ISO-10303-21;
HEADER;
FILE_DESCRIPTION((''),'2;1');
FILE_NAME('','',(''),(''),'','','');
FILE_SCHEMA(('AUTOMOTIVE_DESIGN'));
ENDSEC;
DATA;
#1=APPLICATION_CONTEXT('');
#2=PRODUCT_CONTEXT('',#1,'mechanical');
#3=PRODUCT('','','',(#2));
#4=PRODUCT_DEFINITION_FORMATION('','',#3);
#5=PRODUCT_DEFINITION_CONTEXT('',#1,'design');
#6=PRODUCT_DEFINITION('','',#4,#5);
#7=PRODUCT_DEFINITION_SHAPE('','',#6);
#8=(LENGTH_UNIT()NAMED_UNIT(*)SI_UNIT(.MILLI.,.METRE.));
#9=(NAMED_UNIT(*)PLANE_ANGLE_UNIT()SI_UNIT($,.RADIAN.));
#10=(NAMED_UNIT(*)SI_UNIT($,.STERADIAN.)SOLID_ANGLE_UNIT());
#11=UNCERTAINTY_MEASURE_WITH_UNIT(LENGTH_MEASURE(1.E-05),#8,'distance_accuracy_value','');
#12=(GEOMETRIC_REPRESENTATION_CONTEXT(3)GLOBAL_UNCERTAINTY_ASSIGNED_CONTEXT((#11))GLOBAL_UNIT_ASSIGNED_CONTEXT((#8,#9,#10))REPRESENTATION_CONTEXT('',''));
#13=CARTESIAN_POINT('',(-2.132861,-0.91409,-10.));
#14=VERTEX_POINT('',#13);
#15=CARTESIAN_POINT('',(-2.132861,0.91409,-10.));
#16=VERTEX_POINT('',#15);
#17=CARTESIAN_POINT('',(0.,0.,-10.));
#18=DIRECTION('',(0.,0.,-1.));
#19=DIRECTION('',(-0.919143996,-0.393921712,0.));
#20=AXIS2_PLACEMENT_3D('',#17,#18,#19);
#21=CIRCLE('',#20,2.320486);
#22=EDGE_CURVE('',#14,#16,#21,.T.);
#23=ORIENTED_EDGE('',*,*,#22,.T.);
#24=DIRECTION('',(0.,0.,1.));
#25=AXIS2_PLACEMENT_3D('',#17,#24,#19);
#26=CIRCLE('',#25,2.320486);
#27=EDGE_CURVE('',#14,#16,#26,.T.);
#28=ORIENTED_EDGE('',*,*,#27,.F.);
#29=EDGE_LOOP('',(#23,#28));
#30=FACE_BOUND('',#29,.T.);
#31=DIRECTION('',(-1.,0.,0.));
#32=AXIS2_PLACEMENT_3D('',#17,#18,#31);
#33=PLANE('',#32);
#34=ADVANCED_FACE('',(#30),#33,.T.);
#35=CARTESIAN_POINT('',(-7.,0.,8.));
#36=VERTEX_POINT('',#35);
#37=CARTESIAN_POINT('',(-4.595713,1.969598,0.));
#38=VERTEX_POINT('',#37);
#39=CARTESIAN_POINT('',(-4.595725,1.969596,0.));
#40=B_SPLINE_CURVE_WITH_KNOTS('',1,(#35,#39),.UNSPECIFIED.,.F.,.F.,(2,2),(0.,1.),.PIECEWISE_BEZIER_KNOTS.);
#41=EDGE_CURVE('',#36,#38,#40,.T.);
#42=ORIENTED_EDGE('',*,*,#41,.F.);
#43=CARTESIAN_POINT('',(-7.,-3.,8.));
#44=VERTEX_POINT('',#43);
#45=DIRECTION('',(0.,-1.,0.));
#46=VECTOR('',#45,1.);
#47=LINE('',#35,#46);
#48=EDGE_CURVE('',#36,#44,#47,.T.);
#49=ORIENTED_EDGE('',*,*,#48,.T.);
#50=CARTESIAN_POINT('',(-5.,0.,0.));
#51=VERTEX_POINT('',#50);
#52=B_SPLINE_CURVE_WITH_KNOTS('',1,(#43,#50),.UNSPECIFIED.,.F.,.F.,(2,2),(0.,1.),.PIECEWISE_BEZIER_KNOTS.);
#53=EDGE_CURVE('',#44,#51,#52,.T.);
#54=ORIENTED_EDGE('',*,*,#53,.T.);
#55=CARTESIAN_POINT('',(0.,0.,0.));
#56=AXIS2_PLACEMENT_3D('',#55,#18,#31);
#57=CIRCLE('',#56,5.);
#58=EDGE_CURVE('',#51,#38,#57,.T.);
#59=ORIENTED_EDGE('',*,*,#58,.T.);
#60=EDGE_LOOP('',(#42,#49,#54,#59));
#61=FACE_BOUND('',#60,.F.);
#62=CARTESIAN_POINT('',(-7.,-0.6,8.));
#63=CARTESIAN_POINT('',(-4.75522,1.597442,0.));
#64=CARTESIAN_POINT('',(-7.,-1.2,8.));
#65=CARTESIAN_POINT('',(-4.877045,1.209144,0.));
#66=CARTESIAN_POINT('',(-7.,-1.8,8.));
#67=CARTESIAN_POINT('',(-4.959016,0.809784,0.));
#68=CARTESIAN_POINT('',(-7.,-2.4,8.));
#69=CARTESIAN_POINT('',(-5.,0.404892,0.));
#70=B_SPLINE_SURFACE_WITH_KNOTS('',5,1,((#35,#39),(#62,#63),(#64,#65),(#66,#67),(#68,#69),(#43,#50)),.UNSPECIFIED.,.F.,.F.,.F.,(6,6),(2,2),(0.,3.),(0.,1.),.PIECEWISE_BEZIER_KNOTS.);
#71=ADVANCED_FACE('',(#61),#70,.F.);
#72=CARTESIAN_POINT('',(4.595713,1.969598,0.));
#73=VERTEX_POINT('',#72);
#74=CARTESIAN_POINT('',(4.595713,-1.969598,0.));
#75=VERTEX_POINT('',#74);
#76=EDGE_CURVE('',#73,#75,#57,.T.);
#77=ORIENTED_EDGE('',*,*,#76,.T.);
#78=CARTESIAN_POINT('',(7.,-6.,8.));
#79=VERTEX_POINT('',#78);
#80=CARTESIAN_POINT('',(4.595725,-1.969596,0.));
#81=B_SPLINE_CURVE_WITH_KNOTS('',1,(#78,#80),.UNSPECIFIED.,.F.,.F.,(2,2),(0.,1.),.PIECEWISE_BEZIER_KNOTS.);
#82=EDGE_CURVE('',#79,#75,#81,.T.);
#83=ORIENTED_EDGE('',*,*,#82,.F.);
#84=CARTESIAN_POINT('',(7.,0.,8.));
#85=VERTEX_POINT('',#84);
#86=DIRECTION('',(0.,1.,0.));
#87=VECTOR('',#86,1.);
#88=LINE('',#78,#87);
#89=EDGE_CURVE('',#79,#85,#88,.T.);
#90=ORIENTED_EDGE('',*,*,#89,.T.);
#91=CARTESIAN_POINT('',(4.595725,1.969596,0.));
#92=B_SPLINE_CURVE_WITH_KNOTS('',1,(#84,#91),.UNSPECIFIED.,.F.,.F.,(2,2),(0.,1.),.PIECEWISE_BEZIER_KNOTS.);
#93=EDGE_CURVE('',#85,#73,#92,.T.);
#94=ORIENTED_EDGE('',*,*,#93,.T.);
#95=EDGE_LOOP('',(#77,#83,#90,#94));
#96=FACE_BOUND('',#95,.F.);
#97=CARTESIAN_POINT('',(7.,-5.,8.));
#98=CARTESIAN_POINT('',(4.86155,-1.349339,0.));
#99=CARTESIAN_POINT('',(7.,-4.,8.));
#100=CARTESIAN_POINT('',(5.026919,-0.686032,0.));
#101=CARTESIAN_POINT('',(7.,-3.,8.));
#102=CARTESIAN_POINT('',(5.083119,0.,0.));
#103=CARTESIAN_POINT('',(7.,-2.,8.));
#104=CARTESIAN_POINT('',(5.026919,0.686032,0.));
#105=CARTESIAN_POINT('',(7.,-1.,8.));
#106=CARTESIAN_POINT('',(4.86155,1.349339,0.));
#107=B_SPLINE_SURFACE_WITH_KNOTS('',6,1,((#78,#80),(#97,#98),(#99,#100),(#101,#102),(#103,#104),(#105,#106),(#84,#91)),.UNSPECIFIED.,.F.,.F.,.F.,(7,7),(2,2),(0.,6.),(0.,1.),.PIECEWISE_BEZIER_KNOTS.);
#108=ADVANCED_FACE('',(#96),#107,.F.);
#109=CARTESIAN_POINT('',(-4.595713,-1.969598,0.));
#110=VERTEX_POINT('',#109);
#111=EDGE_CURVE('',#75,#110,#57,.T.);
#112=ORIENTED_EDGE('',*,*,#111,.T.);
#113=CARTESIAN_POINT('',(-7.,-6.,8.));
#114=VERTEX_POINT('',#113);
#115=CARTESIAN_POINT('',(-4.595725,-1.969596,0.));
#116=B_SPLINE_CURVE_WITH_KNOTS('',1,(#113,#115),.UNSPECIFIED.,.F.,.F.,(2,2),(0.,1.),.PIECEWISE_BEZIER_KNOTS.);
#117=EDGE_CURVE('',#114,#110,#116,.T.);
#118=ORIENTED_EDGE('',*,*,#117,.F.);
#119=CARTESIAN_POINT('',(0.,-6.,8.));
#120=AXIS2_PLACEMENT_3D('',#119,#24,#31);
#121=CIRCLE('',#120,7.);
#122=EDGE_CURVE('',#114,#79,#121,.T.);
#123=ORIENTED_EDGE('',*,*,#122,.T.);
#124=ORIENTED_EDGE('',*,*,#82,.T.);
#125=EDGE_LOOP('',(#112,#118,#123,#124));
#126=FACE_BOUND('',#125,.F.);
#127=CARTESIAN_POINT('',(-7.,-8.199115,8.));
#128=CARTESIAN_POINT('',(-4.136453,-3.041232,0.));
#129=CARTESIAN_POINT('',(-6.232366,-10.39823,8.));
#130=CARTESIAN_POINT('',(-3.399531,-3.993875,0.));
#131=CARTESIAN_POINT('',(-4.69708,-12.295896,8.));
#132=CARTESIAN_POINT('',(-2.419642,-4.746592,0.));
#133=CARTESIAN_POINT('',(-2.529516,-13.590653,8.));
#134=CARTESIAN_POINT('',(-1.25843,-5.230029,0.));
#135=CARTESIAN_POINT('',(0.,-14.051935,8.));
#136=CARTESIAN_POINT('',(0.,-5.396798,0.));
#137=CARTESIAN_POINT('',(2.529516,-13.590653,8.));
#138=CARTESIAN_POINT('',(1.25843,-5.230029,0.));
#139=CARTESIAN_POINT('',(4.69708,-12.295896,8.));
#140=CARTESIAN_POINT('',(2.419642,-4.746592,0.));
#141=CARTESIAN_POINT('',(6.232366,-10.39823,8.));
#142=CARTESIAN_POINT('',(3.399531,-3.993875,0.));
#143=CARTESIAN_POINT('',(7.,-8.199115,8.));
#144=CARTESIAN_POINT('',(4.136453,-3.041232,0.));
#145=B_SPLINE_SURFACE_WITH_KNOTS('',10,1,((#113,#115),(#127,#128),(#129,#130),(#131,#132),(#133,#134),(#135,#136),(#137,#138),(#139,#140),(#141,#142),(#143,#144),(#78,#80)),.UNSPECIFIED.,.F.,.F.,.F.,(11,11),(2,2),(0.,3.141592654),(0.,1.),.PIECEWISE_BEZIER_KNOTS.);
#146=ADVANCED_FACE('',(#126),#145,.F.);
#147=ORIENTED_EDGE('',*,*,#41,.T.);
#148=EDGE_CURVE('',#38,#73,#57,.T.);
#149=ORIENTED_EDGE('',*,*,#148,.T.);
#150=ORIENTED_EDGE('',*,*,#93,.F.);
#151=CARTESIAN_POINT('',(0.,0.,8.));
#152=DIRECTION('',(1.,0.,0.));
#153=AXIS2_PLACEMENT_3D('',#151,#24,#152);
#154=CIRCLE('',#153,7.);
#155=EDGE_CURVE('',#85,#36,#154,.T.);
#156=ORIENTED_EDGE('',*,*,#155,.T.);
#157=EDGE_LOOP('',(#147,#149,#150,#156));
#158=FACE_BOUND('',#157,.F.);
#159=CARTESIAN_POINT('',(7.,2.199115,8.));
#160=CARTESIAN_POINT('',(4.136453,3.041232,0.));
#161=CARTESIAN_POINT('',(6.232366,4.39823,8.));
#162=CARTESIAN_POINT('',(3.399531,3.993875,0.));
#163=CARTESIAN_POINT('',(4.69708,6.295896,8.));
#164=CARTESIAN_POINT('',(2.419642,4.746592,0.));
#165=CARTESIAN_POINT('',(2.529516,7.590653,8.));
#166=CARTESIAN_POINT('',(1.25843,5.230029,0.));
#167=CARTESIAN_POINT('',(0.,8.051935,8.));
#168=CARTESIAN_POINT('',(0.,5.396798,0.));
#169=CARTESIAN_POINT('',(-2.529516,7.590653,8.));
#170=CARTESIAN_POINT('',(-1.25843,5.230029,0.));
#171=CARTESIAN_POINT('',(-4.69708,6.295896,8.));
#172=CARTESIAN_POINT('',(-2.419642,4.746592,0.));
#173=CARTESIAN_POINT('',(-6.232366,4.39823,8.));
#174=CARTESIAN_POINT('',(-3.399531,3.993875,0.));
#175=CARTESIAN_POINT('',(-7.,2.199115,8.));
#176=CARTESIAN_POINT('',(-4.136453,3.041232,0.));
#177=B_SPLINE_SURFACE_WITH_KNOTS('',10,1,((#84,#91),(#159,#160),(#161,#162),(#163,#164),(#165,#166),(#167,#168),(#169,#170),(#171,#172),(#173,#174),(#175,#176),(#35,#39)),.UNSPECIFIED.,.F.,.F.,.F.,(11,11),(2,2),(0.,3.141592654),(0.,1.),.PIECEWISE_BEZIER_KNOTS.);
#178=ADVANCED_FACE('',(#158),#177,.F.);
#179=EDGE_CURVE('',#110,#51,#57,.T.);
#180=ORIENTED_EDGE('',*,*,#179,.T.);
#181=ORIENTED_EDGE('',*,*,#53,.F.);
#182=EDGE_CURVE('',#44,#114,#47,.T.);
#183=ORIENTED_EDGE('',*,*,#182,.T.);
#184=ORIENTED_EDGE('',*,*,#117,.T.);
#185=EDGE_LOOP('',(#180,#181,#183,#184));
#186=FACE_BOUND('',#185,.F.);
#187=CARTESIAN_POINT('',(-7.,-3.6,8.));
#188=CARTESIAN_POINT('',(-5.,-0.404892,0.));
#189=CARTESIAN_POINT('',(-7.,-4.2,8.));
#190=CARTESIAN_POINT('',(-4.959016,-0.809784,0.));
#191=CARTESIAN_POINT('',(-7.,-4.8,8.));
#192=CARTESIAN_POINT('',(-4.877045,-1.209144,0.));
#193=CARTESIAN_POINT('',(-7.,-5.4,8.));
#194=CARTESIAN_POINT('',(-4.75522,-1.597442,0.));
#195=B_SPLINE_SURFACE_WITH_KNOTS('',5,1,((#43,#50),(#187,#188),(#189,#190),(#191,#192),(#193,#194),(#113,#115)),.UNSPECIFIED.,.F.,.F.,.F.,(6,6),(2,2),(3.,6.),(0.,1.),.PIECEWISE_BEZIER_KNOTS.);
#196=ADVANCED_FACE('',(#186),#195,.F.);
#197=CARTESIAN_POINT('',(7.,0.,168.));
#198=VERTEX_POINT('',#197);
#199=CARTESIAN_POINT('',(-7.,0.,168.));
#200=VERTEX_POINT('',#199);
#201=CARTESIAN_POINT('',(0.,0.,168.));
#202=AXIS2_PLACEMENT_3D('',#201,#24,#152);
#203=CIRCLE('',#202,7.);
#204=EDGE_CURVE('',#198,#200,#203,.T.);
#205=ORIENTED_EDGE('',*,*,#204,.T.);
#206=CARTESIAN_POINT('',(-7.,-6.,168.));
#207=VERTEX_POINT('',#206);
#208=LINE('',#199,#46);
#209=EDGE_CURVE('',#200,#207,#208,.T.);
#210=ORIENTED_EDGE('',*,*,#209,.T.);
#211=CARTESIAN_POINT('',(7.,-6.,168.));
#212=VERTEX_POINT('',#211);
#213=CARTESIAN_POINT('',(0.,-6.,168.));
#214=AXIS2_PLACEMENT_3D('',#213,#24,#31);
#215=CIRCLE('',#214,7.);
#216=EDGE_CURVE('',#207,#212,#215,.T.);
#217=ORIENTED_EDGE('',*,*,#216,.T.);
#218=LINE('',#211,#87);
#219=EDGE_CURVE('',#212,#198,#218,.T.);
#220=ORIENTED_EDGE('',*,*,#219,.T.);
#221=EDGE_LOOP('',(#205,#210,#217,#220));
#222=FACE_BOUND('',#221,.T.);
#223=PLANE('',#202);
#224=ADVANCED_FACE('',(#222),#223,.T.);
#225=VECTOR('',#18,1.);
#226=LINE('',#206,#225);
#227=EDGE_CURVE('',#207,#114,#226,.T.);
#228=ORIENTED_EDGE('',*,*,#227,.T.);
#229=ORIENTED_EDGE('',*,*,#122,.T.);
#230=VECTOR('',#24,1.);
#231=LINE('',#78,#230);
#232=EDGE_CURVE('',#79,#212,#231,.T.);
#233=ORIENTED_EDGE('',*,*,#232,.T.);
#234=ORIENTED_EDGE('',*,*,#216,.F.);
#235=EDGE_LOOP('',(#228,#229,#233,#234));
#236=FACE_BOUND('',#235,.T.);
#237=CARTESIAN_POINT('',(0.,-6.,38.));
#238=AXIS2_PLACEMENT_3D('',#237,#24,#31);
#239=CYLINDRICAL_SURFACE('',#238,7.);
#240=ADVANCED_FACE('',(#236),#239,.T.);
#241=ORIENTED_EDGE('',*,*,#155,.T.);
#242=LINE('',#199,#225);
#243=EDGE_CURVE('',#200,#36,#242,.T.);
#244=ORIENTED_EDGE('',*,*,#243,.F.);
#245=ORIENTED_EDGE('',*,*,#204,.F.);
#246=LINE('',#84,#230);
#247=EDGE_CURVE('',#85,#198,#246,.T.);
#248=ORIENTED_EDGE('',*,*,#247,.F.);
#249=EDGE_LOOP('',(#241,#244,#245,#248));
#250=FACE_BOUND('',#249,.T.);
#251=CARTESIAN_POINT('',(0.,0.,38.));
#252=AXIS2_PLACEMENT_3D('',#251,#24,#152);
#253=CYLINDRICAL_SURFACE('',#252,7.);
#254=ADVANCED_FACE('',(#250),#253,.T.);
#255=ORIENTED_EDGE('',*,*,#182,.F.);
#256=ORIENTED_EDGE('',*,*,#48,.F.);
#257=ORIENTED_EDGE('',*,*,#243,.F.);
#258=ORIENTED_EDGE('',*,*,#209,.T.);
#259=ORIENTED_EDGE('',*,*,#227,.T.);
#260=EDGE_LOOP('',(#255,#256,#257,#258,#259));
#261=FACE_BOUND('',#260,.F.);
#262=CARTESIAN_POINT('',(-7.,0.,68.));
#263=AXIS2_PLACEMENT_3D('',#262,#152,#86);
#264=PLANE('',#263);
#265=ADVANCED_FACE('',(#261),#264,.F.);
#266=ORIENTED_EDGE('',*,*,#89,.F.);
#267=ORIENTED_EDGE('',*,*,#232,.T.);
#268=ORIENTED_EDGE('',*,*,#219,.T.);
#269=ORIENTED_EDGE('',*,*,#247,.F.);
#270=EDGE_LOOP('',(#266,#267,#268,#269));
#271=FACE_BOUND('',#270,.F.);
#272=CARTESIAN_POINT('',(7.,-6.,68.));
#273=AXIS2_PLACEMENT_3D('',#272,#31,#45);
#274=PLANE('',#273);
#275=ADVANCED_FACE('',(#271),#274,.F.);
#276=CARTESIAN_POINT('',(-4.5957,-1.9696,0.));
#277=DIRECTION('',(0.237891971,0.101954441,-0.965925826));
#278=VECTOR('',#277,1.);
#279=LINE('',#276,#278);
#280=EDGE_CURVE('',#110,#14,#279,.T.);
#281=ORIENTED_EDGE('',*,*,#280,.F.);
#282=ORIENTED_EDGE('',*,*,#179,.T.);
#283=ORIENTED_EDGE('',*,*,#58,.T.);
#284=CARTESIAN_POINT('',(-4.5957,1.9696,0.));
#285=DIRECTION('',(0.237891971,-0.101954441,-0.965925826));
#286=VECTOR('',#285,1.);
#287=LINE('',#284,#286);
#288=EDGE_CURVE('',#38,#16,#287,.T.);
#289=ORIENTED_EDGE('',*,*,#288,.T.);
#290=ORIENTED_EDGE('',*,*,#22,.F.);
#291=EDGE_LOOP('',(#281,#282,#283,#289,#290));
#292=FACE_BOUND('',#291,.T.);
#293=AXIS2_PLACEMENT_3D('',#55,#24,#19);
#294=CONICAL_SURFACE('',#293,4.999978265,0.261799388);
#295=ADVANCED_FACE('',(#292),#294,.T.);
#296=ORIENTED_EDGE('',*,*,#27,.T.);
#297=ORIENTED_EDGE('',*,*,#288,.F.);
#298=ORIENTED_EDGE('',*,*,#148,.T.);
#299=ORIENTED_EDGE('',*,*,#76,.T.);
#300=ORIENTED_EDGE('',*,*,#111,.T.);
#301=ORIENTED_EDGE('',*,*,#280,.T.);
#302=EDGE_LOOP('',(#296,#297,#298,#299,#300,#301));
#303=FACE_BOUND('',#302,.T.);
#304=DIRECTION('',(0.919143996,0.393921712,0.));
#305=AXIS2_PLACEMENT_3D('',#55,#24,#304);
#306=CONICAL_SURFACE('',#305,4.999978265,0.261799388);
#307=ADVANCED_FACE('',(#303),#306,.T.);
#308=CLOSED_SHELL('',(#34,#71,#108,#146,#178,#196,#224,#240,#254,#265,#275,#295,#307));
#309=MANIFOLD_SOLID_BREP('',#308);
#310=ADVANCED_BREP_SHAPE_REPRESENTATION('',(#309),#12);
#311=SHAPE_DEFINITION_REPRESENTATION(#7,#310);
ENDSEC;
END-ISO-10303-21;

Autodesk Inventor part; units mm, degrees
ref_plane "YZ Plane" through (0, 0, 0) normal (1, 0, 0) x (0, 1, 0)
ref_plane "XZ Plane" through (0, 0, 0) normal (0, 1, 0) x (-1, 0, 0)
sketch "Sketch4" plane through (0, 0, 0) normal (0, 0, -1) x (-1, 0, 0)
  circle A0 centre (0, 0) radius 5
  dimension "d17" = 10
ref_plane "Work Plane3" through (0, 0, 8) normal (0, 0, 1) x (1, 0, 0)
sketch "Sketch1" plane through (0, 0, 8) normal (0, 0, 1) x (1, 0, 0)
  line L0 (0, 0) -> (0, -6) construction
  line L1 (-7, 0) -> (-7, -6)
  line L2 (7, -6) -> (7, 0)
  arc A0 (7, 0) -> (-7, 0) centre (0, 0) ccw
  arc A1 (-7, -6) -> (7, -6) centre (0, -6) ccw
  point P0 (0, -3)
  dimension "d0" = 6
  dimension "d1" = 14
extrude "Extrusion1" add sketch "Sketch1" along normal blind 30
ref_plane "Work Plane1" through (0, 0, 68) normal (0, 0, 1) x (1, 0, 0)
ref_plane "Work Plane2" through (0, 0, 168) normal (0, 0, 1) x (1, 0, 0)
sketch "Sketch2" plane through (0, 0, 68) normal (0, 0, 1) x (1, 0, 0)
  arc A0 (-7, -6) -> (7, -6) centre (0, -6) ccw projected
  line L0 (7, -6) -> (7, 0) projected
  arc A1 (7, 0) -> (-7, 0) centre (0, 0) ccw projected
  line L1 (-7, 0) -> (-7, -6) projected
extrude "Extrusion2" add sketch "Sketch2" along normal up to surface (100 mm away)
loft "Loft1" add section 1 edges at (0, -13, 38) (7, -3, 38) (0, 7, 38) (-7, -3, 38) section 2 edges at (7, -3, 68) (0, -13, 68) (-7, -3, 68) (0, 7, 68)
ref_plane "Work Plane4" through (0, 0, 38) normal (0, 0, 1) x (1, 0, 0)
loft "Loft2" add profiles "Sketch4" section 1 edges at (0, -13, 8) (-7, -3, 8) (0, 7, 8) (7, -3, 8)
sketch "Sketch5" plane through (0, 0, 0) normal (0, 0, -1) x (-1, 0, 0)
  arc A0 (-4.5957, -1.9696) -> (4.5957, -1.9696) centre (0, 0) ccw projected
  arc A1 (4.5957, -1.9696) -> (4.5957, 1.9696) centre (0, 0) ccw projected
  arc A2 (4.5957, 1.9696) -> (-4.5957, 1.9696) centre (0, 0) ccw projected
  arc A3 (-4.5957, 1.9696) -> (-4.5957, -1.9696) centre (0, 0) ccw projected
extrude "Extrusion4" add sketch "Sketch5" along normal blind 10 draft -15
properties part number "Form_test"
